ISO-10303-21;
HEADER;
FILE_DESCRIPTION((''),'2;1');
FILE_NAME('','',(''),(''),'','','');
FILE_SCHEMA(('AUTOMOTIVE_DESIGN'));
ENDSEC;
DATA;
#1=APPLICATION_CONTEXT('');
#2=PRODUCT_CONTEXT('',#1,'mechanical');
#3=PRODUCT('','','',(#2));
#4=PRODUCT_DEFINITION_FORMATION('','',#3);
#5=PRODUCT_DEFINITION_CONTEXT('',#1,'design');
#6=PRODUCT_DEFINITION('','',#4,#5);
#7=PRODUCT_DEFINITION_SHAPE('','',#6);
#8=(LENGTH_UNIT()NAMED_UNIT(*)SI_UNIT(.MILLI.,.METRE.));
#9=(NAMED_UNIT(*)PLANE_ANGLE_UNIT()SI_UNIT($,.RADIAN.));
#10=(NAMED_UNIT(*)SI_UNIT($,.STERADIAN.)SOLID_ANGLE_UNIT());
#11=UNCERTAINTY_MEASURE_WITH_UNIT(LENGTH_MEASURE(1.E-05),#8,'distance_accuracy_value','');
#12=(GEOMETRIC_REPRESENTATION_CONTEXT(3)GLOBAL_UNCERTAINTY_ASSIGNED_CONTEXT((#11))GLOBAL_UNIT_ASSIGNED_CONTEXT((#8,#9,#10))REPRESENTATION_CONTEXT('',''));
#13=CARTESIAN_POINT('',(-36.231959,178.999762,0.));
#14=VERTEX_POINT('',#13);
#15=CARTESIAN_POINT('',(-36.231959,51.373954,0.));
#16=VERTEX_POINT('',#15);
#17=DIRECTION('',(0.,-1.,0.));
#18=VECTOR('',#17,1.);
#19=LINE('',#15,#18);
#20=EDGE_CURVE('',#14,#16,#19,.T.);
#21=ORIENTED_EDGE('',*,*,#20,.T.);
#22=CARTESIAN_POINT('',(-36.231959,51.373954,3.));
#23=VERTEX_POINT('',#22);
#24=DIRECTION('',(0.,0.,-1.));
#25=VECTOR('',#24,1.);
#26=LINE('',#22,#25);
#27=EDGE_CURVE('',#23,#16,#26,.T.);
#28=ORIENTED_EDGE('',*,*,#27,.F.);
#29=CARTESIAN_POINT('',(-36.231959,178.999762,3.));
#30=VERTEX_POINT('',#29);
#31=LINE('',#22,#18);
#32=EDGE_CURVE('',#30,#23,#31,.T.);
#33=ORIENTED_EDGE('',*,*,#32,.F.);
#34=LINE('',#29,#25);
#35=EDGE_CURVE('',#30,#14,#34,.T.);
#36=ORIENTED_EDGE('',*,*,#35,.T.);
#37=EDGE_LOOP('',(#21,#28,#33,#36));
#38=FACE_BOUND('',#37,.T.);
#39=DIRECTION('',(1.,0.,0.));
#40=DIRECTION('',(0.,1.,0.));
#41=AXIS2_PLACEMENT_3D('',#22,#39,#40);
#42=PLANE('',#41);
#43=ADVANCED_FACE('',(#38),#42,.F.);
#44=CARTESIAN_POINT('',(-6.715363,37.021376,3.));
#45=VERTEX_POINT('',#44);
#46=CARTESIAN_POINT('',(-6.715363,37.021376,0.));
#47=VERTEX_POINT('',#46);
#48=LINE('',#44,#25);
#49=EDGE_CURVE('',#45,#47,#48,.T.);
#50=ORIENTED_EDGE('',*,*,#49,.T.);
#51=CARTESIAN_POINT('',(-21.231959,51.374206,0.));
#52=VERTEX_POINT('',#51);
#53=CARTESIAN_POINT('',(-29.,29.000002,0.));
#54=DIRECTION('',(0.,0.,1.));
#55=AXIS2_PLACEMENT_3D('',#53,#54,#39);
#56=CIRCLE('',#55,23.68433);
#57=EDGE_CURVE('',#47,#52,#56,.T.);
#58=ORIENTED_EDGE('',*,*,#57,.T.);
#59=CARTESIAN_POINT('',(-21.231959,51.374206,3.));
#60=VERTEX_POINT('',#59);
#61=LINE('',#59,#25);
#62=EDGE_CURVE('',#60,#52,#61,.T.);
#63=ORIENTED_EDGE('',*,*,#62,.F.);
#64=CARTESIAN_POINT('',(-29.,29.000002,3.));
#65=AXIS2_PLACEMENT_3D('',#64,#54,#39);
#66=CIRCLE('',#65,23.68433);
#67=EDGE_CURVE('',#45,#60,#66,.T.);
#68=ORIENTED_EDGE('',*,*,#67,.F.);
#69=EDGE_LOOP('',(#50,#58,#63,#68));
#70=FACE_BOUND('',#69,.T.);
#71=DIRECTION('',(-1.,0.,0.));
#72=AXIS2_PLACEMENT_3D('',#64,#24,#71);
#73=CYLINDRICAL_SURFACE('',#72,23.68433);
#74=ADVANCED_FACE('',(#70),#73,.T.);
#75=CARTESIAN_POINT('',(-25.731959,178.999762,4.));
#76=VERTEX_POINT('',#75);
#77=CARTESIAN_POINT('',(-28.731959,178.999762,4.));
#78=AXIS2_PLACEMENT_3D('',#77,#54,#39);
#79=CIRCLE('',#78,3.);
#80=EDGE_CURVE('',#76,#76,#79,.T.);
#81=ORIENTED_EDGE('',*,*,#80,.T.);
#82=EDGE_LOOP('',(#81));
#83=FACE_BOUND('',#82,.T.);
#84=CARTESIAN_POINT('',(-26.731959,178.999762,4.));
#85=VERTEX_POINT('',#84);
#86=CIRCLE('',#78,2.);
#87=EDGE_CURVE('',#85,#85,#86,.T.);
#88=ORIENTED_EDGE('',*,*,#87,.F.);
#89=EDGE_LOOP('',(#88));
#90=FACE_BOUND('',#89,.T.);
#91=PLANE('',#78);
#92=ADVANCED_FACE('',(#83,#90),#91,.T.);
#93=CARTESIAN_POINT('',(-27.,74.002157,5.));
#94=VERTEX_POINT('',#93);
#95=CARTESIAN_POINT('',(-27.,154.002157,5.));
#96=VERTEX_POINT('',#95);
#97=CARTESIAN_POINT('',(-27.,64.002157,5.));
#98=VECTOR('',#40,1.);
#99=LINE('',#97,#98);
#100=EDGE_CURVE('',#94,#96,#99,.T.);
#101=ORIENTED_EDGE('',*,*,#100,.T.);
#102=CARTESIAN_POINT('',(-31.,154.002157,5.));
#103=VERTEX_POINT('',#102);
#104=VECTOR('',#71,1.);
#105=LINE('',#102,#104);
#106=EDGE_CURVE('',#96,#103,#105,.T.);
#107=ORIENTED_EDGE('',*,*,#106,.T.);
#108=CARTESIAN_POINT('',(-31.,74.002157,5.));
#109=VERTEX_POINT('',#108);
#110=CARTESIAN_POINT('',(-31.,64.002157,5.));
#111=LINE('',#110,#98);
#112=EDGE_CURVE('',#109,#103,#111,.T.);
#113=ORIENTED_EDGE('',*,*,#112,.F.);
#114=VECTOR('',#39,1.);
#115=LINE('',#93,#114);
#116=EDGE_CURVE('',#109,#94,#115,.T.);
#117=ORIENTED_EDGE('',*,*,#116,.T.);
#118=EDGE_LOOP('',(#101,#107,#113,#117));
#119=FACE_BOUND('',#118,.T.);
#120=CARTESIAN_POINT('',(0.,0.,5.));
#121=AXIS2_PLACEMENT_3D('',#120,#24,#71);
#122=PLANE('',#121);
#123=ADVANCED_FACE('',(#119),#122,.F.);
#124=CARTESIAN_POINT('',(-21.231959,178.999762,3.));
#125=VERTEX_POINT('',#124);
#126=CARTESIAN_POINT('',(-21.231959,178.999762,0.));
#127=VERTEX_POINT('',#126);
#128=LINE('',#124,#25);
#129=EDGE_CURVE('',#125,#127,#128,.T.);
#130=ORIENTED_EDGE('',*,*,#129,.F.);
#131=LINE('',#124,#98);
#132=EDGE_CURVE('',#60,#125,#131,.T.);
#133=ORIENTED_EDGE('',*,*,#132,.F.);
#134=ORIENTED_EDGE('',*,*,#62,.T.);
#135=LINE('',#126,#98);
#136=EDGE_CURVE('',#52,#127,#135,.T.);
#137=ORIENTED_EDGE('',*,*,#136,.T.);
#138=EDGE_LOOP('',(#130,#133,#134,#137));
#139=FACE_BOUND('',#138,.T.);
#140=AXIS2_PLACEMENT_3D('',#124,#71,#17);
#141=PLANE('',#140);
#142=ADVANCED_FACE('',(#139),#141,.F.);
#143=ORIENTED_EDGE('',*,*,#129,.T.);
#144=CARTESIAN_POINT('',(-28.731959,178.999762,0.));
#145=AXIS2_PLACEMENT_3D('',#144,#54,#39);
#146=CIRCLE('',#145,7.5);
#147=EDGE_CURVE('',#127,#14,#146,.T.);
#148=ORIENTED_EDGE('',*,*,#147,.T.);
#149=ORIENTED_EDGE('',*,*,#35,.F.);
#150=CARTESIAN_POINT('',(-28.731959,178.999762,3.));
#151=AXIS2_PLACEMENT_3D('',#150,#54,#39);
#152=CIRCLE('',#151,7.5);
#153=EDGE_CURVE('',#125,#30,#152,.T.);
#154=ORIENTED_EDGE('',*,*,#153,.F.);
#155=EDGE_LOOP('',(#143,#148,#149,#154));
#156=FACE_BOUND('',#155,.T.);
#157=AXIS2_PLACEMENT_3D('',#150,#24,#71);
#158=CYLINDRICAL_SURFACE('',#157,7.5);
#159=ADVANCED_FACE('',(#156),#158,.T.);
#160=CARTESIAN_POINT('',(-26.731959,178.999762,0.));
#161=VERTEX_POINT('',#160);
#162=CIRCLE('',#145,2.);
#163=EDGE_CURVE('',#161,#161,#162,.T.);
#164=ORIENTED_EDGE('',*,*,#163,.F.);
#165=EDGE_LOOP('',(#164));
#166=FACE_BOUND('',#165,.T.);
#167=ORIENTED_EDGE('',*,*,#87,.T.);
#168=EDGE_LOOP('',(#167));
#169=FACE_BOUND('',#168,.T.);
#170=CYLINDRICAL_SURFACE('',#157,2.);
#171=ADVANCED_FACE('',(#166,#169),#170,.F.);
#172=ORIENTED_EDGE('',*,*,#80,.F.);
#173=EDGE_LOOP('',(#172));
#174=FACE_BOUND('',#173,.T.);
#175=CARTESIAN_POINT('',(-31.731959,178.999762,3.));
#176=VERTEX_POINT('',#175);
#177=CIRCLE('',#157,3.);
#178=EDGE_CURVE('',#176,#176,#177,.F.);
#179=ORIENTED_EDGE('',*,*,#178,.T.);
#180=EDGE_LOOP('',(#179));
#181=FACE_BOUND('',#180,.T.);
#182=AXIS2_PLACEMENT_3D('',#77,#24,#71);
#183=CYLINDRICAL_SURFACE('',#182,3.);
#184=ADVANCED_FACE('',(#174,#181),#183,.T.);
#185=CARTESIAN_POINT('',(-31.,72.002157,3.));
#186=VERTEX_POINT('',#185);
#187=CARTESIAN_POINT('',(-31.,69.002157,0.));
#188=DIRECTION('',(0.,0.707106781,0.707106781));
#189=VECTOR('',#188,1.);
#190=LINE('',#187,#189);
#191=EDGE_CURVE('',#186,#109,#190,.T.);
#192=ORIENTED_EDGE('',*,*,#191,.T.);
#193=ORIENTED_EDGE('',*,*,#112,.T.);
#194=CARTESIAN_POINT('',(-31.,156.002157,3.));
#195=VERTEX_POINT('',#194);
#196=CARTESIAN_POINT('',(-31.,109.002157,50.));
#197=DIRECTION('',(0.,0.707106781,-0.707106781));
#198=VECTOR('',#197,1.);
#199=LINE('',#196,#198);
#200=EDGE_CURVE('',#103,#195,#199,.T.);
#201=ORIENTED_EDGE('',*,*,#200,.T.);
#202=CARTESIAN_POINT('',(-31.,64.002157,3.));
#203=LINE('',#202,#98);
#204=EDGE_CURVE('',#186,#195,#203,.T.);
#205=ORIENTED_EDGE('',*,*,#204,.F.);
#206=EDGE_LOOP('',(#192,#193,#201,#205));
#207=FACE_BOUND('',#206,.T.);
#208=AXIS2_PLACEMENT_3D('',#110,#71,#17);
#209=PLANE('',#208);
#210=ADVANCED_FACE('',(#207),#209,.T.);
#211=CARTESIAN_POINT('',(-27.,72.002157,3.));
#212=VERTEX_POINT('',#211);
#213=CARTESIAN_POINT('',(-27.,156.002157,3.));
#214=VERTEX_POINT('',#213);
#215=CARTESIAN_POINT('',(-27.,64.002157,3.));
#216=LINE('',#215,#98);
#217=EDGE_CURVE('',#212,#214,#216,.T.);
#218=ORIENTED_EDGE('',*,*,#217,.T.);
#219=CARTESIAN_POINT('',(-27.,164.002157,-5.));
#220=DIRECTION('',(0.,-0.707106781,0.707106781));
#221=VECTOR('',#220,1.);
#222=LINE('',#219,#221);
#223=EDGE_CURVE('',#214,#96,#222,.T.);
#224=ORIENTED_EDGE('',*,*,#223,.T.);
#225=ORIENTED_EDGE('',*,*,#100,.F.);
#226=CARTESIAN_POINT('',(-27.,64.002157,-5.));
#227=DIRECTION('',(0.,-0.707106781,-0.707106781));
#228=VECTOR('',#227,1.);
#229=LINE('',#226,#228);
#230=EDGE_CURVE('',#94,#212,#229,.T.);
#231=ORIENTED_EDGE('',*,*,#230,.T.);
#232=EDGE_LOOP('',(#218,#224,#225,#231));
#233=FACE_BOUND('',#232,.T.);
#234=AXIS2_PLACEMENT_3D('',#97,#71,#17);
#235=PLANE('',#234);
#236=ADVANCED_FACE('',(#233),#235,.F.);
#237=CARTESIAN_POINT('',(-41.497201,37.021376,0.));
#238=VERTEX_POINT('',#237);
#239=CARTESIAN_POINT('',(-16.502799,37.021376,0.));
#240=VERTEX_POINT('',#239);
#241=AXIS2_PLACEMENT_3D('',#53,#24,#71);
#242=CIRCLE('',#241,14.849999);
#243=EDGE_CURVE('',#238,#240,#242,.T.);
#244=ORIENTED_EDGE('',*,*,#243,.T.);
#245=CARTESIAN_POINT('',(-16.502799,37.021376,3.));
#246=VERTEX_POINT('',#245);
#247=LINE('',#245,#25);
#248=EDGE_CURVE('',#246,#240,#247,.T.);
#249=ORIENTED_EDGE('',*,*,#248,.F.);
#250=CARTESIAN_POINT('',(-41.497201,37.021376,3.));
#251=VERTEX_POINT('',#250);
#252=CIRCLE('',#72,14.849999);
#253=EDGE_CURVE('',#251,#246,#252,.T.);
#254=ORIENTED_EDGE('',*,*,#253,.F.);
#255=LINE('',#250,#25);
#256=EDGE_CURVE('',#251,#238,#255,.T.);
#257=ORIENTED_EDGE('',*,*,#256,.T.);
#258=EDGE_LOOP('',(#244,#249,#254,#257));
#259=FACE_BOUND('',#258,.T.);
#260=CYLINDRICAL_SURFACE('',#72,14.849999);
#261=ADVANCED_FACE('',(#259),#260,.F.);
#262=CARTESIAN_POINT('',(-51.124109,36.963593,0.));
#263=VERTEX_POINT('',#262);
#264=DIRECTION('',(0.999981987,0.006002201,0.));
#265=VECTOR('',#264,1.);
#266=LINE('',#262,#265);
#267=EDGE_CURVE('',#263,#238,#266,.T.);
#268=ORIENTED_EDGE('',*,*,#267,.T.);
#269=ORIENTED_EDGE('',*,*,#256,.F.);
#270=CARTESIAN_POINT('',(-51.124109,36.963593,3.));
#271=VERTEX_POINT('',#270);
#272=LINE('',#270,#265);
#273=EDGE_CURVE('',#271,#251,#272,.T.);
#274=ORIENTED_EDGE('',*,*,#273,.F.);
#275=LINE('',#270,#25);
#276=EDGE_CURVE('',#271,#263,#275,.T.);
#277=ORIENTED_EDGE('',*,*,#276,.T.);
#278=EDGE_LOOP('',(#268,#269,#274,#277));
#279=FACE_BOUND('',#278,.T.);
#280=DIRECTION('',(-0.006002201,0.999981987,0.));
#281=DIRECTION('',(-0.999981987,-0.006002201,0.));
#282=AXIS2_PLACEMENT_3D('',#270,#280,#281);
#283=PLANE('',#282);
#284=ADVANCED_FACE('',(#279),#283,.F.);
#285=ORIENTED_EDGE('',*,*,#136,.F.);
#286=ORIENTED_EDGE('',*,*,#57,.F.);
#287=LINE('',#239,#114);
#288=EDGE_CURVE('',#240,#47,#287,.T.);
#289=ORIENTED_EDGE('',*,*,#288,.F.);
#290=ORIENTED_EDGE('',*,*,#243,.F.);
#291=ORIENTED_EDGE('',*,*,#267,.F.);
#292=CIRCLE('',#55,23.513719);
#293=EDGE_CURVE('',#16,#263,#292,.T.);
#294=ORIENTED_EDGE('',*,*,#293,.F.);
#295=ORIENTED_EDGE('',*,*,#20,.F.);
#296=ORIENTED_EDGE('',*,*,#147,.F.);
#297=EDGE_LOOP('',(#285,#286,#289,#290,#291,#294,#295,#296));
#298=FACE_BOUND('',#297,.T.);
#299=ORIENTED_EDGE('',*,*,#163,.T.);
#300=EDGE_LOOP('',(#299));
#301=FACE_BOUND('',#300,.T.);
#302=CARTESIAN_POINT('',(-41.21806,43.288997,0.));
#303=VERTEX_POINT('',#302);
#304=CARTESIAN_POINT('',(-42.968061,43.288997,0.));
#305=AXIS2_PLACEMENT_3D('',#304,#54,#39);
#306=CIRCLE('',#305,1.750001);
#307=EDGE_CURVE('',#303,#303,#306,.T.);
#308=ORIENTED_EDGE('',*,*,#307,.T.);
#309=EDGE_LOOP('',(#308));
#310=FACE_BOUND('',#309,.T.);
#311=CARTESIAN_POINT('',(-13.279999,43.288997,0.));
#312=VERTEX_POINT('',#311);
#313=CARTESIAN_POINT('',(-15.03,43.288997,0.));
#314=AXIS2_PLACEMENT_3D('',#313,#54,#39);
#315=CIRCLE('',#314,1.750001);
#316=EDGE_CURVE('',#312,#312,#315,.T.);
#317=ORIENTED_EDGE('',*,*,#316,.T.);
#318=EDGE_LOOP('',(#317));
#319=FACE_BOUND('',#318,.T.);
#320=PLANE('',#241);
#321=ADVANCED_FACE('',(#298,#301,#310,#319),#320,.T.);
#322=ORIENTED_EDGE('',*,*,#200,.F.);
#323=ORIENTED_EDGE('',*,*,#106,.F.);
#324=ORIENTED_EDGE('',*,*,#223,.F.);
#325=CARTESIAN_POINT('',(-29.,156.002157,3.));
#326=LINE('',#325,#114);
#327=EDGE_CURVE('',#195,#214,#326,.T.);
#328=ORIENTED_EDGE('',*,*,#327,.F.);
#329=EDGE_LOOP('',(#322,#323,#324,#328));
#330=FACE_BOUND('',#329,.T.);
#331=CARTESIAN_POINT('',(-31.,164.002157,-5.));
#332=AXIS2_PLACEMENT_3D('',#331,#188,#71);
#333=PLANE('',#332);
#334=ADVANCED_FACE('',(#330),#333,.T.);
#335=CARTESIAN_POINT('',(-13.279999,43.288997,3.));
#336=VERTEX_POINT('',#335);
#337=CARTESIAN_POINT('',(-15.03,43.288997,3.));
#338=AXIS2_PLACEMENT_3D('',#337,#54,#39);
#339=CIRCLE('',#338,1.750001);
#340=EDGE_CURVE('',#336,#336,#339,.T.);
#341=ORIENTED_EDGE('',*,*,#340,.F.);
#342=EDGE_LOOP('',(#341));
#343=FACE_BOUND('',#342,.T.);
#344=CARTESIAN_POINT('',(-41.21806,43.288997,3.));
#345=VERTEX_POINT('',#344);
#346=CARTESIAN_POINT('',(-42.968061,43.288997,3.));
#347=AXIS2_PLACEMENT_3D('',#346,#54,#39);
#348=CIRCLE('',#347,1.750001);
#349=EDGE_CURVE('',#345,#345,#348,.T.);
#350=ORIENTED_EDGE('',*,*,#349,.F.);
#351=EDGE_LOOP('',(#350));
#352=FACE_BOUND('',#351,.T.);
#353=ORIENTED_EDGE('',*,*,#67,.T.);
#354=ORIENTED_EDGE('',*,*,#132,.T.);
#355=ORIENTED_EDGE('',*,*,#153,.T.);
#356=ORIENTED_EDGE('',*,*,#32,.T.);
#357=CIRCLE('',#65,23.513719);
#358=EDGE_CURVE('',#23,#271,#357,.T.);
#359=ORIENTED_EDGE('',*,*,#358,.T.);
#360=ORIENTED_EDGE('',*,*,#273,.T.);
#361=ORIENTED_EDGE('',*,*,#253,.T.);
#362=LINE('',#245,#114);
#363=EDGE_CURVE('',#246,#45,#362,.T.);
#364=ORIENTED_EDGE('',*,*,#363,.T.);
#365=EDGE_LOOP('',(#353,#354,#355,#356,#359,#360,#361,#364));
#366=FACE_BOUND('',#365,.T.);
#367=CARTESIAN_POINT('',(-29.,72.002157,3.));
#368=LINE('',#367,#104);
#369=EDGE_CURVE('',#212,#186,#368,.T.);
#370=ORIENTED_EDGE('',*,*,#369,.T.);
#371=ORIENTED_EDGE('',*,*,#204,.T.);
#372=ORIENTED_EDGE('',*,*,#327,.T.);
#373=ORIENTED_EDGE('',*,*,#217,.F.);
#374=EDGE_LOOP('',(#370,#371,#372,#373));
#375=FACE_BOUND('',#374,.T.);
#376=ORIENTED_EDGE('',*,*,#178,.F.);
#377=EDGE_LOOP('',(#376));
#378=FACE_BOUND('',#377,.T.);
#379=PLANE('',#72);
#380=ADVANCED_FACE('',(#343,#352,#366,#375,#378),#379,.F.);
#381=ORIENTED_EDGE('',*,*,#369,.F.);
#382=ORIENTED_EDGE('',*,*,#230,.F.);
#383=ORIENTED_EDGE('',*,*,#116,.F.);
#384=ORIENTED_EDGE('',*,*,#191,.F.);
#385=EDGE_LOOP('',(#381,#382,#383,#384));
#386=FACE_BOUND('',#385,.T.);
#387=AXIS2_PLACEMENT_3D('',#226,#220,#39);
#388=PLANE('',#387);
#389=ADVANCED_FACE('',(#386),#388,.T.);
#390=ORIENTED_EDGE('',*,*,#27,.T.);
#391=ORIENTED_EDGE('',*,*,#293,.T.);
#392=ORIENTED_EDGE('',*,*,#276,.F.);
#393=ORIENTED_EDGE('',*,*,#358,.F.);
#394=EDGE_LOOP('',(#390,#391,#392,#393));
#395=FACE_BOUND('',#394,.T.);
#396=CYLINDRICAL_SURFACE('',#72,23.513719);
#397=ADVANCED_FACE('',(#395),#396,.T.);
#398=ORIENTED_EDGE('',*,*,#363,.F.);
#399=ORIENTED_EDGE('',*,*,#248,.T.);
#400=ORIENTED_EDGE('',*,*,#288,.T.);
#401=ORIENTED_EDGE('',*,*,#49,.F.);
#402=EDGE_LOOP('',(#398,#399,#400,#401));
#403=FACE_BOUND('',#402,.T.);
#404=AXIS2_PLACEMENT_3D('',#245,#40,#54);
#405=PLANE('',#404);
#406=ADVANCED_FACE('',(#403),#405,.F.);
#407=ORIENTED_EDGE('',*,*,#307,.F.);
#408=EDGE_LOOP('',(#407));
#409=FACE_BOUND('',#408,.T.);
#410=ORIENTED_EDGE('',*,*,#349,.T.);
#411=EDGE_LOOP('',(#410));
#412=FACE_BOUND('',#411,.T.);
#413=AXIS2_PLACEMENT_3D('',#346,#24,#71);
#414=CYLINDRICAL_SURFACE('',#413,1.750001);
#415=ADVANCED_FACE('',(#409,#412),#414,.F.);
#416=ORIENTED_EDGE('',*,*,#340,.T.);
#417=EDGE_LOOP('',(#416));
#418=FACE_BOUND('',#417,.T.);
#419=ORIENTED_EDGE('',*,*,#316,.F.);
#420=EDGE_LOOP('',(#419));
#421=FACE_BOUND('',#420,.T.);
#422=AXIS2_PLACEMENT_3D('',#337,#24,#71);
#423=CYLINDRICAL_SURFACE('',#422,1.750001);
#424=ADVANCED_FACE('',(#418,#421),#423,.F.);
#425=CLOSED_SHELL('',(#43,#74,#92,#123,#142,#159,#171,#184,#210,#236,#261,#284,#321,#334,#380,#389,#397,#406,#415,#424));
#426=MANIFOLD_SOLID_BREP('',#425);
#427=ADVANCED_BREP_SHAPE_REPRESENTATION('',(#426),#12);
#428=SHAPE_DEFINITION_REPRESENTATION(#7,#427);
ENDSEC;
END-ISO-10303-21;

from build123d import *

# Parameters (mm, degrees)
SKETCH1_R           = 1.750000705
SKETCH1_R_2         = 2.000000004
BOSS_EXTRUDE1_DEPTH = 3
SKETCH4_R           = 3
SKETCH4_R_2         = 2
BOSS_EXTRUDE4_DEPTH = 1
SKETCH5_W           = 4
SKETCH5_H           = 100
EXTRUDE_THIN1_DEPTH = 2
CHAMFER1_SIZE       = 10


with BuildPart() as part:
    # Sketch1 → Boss-Extrude1 (new body)
    with BuildSketch(Plane.XY):
        with BuildLine():
            Line((-51.124108856, 36.963592514), (-41.497200727, 37.021376193))
            ThreePointArc((-41.497200727, 37.021376193), (-29.000000097, 43.850000709), (-16.502799466, 37.021376193))
            Line((-16.502799466, 37.021376193), (-6.715362892, 37.021376193))
            ThreePointArc((-6.715362892, 37.021376193), (-12.347919102, 45.842082936), (-21.231959071, 51.374206468))
            Line((-21.231959071, 51.374206468), (-21.231959071, 178.999762083))
            ThreePointArc((-21.231959071, 178.999762083), (-28.731959071, 186.499762083), (-36.231959071, 178.999762083))
            Line((-36.231959071, 178.999762083), (-36.231959071, 51.373953802))
            ThreePointArc((-36.231959071, 51.373953802), (-45.351125633, 45.897802101), (-51.124108856, 36.963592514))
        make_face()
        with Locations((-42.968060821, 43.288996652)):
            Circle(SKETCH1_R, mode=Mode.SUBTRACT)
        with Locations((-15.030000194, 43.288996652)):
            Circle(SKETCH1_R, mode=Mode.SUBTRACT)
        with Locations((-28.731959071, 178.999762083)):
            Circle(SKETCH1_R_2, mode=Mode.SUBTRACT)
    extrude(amount=BOSS_EXTRUDE1_DEPTH)

    # Sketch4 → Boss-Extrude4 (add)
    with BuildSketch(Plane.XY.offset(3)):
        with Locations(Location((-28.731959071, 178.999762083, 0), (0, 0, 180))):
            Circle(SKETCH4_R)
        with Locations((-28.731959071, 178.999762083)):
            Circle(SKETCH4_R_2, mode=Mode.SUBTRACT)
    extrude(amount=BOSS_EXTRUDE4_DEPTH)

    # Sketch5 → Extrude-Thin1 (add)
    with BuildSketch(Plane.XY.offset(3)):
        with Locations((-29.000000097, 114.00215714)):
            Rectangle(SKETCH5_W, SKETCH5_H)
    extrude(amount=EXTRUDE_THIN1_DEPTH)

    # Chamfer1
    # the kernel refuses this chamfer: 10 mm, written as the material it takes off along each edge
    with BuildSketch(Plane(origin=(-1.283170217, 164.00215714, 5), x_dir=(0, 0.0274958766105877, -0.9996219169112968), z_dir=(-1, 0, 0))) as chamfer1_piece_1_section:
        Polygon((CHAMFER1_SIZE * 0.999621916911, CHAMFER1_SIZE * 0.0274958766106), (-CHAMFER1_SIZE * 0.0274958766106, CHAMFER1_SIZE * 0.999621916911), (0, 0), align=None)
    chamfer1_piece_1 = extrude(amount=55.433659759, mode=Mode.PRIVATE)
    chamfer1_piece_1 = split(chamfer1_piece_1, bisect_by=Plane(origin=(-29.000000097, 159.483638622, 3), z_dir=(0, 0, 1)), keep=Keep.TOP, mode=Mode.PRIVATE)
    add(chamfer1_piece_1, mode=Mode.SUBTRACT)
    with BuildSketch(Plane(origin=(-56.716829977, 64.00215714, 5), x_dir=(0, -0.027495876610586317, -0.9996219169112968), z_dir=(1, 0, 0))) as chamfer1_piece_2_section:
        Polygon((CHAMFER1_SIZE * 0.999621916911, CHAMFER1_SIZE * 0.0274958766106), (-CHAMFER1_SIZE * 0.0274958766106, CHAMFER1_SIZE * 0.999621916911), (0, 0), align=None)
    chamfer1_piece_2 = extrude(amount=55.433659759, mode=Mode.PRIVATE)
    chamfer1_piece_2 = split(chamfer1_piece_2, bisect_by=Plane(origin=(-29.000000097, 68.520675659, 3), z_dir=(0, 0, 1)), keep=Keep.TOP, mode=Mode.PRIVATE)
    add(chamfer1_piece_2, mode=Mode.SUBTRACT)


solid = part.part
